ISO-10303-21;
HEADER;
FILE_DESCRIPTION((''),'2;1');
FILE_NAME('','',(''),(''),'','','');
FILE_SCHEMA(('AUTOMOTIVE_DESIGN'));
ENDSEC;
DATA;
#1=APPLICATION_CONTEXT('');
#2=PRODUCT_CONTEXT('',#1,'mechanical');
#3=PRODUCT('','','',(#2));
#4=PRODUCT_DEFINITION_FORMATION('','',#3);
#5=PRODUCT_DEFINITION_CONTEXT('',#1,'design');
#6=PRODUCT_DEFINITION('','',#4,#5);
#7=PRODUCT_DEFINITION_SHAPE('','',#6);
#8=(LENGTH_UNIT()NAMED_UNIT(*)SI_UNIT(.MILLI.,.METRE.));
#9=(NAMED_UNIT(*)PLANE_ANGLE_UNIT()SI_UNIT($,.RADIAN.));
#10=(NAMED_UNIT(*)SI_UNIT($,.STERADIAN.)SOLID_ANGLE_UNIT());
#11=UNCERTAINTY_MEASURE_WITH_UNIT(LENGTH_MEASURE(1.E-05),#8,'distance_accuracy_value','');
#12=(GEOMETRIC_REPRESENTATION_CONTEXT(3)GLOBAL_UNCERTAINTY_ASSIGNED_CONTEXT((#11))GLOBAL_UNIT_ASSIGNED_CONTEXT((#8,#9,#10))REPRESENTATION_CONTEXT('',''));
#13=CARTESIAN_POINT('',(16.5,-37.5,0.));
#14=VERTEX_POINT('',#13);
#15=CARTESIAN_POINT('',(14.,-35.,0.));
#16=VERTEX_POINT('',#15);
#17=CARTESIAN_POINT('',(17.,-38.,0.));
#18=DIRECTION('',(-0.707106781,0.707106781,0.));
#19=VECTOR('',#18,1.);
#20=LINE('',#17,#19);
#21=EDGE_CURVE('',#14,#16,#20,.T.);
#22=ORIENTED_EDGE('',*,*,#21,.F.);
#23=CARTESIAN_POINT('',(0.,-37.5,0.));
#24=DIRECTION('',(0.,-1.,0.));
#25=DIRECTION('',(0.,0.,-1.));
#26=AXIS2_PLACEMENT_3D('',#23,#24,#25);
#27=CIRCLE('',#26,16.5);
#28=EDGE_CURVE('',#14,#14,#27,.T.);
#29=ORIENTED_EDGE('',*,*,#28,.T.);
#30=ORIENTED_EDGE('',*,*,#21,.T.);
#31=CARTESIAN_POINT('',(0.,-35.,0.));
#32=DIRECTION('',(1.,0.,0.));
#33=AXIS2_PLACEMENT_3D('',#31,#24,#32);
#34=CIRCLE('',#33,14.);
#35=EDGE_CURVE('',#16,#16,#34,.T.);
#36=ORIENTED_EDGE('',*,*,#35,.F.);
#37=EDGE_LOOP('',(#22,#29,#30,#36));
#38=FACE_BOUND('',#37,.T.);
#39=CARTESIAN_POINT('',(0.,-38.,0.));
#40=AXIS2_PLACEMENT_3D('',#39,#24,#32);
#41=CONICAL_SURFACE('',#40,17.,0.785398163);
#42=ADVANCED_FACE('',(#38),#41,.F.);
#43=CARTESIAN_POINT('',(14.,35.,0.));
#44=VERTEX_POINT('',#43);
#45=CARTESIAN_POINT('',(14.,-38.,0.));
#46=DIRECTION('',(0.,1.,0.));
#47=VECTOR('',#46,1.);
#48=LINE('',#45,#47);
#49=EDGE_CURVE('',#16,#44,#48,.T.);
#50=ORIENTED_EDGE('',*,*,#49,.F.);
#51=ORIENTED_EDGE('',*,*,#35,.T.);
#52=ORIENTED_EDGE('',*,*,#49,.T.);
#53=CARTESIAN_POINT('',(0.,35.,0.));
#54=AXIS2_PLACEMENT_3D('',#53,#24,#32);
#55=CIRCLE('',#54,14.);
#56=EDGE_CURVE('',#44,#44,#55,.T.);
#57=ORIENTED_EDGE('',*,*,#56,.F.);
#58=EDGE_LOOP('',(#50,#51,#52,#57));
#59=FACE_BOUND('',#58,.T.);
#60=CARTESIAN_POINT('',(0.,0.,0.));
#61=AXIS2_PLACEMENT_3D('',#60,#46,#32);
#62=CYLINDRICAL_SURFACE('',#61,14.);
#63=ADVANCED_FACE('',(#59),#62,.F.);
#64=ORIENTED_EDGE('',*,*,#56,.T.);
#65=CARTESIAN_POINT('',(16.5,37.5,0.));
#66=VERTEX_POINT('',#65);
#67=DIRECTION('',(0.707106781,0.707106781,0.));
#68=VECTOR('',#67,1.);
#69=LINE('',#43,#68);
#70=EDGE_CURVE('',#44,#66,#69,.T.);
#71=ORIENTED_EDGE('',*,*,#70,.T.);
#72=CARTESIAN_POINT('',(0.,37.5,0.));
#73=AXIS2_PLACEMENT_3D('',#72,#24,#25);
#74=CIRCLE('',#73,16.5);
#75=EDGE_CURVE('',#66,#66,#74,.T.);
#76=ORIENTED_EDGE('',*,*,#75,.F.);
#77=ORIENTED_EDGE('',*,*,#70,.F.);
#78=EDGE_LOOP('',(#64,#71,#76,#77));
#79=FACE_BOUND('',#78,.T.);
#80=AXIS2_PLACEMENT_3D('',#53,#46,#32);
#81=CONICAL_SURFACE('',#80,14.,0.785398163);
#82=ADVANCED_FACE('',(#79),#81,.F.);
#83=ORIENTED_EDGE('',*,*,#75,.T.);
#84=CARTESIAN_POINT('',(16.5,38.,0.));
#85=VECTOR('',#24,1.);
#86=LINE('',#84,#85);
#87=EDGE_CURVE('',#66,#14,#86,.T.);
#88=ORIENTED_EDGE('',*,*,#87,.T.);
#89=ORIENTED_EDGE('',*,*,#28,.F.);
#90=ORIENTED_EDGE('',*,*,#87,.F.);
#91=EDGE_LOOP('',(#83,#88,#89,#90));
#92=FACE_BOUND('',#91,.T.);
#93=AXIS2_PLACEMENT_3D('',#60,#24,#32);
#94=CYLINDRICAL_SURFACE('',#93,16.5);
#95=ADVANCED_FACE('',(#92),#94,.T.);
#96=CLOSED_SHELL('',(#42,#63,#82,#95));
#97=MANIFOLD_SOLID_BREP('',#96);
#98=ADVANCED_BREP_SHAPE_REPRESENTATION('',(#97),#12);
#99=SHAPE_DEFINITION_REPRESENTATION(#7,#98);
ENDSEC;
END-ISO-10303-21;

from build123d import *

# Parameters (mm, degrees)
F0_R     = 16.5
F0_R_2   = 14
F1_DEPTH = 38


# Not quite as in the source:
# - a fillet or chamfer that OpenCascade refuses, or shapes differently, is made with other operations: its cross-section is extruded or revolved along the edge and cut away or added


with BuildPart() as f1:
    # F0 (on Front) → F1 (new body, symmetric)
    with BuildSketch(Plane.XZ):
        Circle(F0_R)
        Circle(F0_R_2, mode=Mode.SUBTRACT)
    extrude(amount=F1_DEPTH, both=True)

    # F2: chamfer of 3 on 2 edges, made by hand

    # F2_s1 → F2_t2 (revolve, cut)
    with BuildSketch(Plane.XY):
        Polygon((17, -38), (14, -35), (14, -38), align=None)
    revolve(axis=Axis((0, -38, 0), (0, -1, 0)), mode=Mode.SUBTRACT)

    # F2_s3 → F2_t4 (revolve, cut)
    with BuildSketch(Plane.XY):
        Polygon((14, 35), (17, 38), (14, 38), align=None)
    revolve(axis=Axis((0, 38, 0), (0, -1, 0)), mode=Mode.SUBTRACT)


solid = f1.part
